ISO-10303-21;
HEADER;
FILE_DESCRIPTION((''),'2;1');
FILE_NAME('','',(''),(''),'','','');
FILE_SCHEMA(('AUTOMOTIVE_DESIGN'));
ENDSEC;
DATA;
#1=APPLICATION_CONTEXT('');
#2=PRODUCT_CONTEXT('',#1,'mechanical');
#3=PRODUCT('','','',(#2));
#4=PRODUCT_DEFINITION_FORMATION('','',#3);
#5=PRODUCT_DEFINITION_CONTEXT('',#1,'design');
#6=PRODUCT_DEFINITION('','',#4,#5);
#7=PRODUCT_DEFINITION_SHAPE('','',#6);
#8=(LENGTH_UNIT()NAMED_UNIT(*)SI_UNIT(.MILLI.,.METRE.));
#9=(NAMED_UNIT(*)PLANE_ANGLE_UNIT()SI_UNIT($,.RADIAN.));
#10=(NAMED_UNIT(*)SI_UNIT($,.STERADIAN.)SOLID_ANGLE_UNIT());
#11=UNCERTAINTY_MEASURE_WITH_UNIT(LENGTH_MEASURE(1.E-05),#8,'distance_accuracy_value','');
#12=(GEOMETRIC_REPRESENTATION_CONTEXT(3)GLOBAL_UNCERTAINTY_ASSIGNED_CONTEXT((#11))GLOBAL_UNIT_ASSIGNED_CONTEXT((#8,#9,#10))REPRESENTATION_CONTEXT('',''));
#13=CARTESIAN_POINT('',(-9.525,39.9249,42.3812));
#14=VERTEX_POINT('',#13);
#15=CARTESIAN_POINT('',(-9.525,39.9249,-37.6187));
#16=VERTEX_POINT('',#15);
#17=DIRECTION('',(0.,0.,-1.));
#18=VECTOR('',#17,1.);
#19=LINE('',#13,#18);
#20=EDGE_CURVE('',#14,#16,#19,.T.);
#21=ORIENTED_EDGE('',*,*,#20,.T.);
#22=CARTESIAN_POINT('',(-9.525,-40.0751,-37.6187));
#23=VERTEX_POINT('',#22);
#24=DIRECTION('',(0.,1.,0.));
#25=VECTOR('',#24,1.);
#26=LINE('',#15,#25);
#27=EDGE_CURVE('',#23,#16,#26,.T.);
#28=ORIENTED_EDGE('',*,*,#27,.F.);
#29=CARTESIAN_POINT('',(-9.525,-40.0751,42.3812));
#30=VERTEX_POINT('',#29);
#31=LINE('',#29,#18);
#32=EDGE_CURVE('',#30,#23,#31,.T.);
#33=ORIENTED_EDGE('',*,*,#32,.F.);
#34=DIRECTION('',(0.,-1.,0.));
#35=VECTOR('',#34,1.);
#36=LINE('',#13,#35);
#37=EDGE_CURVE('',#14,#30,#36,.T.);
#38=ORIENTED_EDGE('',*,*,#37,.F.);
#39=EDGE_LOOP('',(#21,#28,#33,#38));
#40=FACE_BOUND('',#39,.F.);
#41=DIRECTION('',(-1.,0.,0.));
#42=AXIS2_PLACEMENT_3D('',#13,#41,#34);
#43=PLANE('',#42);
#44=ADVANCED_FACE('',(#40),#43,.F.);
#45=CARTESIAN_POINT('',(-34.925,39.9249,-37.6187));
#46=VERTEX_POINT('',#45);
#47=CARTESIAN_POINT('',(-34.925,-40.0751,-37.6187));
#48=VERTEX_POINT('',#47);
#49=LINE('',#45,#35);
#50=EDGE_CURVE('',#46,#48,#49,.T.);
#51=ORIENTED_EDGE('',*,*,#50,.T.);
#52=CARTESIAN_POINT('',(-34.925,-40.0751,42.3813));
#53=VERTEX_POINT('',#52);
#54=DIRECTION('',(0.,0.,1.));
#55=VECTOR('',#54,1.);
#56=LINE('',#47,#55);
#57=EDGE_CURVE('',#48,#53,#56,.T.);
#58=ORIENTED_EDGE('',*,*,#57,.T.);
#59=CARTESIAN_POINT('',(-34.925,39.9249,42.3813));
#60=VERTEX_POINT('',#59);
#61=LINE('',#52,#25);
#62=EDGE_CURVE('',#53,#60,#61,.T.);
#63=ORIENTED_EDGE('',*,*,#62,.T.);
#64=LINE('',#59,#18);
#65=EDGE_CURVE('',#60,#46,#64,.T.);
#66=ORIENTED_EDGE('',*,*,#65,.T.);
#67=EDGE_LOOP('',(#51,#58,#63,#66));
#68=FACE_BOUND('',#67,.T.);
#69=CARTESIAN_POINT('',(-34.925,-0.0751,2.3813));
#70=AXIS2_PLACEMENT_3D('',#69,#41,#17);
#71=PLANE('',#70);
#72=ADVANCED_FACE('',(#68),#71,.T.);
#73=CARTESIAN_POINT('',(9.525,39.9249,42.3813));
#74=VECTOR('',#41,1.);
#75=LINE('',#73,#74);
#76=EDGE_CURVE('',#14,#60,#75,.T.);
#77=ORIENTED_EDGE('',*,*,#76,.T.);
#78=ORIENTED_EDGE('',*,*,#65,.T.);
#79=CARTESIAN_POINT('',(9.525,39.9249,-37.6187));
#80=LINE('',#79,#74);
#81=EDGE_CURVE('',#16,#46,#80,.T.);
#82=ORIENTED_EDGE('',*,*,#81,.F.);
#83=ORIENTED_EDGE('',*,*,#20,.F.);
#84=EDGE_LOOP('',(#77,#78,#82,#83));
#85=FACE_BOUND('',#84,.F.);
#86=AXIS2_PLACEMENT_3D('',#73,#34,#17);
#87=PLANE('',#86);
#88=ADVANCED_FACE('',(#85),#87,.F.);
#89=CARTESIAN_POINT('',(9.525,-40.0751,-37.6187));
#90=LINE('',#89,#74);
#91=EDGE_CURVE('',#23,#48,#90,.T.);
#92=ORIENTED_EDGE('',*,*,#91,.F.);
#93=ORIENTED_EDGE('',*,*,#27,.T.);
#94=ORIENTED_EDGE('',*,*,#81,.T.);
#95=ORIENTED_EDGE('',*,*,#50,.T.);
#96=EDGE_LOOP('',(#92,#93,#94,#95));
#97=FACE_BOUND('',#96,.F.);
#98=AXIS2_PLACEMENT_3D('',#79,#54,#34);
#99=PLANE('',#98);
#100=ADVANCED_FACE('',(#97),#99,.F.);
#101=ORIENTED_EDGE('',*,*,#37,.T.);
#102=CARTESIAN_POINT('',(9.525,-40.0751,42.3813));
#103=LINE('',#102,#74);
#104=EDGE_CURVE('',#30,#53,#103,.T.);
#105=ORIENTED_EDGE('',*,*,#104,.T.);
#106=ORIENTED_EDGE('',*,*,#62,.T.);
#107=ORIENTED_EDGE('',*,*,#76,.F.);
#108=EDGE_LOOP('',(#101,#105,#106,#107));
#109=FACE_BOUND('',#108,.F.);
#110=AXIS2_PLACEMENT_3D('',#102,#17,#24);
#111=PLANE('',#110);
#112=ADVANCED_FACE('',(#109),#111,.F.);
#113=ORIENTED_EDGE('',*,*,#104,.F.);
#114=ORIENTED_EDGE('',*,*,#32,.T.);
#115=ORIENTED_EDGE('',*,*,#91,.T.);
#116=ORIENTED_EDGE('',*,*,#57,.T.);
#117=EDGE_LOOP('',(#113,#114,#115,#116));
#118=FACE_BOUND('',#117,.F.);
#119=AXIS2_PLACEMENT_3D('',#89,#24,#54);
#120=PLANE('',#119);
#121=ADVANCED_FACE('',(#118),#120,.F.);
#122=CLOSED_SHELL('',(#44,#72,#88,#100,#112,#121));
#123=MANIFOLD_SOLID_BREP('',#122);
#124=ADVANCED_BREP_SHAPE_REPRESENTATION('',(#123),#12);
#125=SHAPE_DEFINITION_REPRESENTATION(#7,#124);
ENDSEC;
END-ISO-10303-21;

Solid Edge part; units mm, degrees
sketch "Sketch1" plane through (9.525, 0, 3.175) normal (1, 0, 0) x (0, 1, 0)
  line L0 (39.9249, -40.7937) -> (-40.0751, -40.7937)
  line L1 (-40.0751, -40.7937) -> (-40.0751, 39.2063)
  line L2 (-40.0751, 39.2063) -> (39.9249, 39.2063)
  line L3 (39.9249, 39.2063) -> (39.9249, -40.7937)
  dimension "D1" = 80
  dimension "D2" = 80
extrude "Protrusion1" add sketch "Sketch1" against normal blind 44.45
sketch "Sketch2" plane through (-7.62, 0, 42.3812) normal (0, 0, 1) x (1, 0, 0)
  line L0 (-1.905, 39.9249) -> (-1.905, -40.0751)
  dimension "D1" = 25.4
extrude "Cutout1" cut sketch "Sketch2" against normal up to next material side at (-9.475, -0.0751, 42.3812)
extrude "Cutout2" [suppressed]
pattern "Pattern1" [suppressed]
